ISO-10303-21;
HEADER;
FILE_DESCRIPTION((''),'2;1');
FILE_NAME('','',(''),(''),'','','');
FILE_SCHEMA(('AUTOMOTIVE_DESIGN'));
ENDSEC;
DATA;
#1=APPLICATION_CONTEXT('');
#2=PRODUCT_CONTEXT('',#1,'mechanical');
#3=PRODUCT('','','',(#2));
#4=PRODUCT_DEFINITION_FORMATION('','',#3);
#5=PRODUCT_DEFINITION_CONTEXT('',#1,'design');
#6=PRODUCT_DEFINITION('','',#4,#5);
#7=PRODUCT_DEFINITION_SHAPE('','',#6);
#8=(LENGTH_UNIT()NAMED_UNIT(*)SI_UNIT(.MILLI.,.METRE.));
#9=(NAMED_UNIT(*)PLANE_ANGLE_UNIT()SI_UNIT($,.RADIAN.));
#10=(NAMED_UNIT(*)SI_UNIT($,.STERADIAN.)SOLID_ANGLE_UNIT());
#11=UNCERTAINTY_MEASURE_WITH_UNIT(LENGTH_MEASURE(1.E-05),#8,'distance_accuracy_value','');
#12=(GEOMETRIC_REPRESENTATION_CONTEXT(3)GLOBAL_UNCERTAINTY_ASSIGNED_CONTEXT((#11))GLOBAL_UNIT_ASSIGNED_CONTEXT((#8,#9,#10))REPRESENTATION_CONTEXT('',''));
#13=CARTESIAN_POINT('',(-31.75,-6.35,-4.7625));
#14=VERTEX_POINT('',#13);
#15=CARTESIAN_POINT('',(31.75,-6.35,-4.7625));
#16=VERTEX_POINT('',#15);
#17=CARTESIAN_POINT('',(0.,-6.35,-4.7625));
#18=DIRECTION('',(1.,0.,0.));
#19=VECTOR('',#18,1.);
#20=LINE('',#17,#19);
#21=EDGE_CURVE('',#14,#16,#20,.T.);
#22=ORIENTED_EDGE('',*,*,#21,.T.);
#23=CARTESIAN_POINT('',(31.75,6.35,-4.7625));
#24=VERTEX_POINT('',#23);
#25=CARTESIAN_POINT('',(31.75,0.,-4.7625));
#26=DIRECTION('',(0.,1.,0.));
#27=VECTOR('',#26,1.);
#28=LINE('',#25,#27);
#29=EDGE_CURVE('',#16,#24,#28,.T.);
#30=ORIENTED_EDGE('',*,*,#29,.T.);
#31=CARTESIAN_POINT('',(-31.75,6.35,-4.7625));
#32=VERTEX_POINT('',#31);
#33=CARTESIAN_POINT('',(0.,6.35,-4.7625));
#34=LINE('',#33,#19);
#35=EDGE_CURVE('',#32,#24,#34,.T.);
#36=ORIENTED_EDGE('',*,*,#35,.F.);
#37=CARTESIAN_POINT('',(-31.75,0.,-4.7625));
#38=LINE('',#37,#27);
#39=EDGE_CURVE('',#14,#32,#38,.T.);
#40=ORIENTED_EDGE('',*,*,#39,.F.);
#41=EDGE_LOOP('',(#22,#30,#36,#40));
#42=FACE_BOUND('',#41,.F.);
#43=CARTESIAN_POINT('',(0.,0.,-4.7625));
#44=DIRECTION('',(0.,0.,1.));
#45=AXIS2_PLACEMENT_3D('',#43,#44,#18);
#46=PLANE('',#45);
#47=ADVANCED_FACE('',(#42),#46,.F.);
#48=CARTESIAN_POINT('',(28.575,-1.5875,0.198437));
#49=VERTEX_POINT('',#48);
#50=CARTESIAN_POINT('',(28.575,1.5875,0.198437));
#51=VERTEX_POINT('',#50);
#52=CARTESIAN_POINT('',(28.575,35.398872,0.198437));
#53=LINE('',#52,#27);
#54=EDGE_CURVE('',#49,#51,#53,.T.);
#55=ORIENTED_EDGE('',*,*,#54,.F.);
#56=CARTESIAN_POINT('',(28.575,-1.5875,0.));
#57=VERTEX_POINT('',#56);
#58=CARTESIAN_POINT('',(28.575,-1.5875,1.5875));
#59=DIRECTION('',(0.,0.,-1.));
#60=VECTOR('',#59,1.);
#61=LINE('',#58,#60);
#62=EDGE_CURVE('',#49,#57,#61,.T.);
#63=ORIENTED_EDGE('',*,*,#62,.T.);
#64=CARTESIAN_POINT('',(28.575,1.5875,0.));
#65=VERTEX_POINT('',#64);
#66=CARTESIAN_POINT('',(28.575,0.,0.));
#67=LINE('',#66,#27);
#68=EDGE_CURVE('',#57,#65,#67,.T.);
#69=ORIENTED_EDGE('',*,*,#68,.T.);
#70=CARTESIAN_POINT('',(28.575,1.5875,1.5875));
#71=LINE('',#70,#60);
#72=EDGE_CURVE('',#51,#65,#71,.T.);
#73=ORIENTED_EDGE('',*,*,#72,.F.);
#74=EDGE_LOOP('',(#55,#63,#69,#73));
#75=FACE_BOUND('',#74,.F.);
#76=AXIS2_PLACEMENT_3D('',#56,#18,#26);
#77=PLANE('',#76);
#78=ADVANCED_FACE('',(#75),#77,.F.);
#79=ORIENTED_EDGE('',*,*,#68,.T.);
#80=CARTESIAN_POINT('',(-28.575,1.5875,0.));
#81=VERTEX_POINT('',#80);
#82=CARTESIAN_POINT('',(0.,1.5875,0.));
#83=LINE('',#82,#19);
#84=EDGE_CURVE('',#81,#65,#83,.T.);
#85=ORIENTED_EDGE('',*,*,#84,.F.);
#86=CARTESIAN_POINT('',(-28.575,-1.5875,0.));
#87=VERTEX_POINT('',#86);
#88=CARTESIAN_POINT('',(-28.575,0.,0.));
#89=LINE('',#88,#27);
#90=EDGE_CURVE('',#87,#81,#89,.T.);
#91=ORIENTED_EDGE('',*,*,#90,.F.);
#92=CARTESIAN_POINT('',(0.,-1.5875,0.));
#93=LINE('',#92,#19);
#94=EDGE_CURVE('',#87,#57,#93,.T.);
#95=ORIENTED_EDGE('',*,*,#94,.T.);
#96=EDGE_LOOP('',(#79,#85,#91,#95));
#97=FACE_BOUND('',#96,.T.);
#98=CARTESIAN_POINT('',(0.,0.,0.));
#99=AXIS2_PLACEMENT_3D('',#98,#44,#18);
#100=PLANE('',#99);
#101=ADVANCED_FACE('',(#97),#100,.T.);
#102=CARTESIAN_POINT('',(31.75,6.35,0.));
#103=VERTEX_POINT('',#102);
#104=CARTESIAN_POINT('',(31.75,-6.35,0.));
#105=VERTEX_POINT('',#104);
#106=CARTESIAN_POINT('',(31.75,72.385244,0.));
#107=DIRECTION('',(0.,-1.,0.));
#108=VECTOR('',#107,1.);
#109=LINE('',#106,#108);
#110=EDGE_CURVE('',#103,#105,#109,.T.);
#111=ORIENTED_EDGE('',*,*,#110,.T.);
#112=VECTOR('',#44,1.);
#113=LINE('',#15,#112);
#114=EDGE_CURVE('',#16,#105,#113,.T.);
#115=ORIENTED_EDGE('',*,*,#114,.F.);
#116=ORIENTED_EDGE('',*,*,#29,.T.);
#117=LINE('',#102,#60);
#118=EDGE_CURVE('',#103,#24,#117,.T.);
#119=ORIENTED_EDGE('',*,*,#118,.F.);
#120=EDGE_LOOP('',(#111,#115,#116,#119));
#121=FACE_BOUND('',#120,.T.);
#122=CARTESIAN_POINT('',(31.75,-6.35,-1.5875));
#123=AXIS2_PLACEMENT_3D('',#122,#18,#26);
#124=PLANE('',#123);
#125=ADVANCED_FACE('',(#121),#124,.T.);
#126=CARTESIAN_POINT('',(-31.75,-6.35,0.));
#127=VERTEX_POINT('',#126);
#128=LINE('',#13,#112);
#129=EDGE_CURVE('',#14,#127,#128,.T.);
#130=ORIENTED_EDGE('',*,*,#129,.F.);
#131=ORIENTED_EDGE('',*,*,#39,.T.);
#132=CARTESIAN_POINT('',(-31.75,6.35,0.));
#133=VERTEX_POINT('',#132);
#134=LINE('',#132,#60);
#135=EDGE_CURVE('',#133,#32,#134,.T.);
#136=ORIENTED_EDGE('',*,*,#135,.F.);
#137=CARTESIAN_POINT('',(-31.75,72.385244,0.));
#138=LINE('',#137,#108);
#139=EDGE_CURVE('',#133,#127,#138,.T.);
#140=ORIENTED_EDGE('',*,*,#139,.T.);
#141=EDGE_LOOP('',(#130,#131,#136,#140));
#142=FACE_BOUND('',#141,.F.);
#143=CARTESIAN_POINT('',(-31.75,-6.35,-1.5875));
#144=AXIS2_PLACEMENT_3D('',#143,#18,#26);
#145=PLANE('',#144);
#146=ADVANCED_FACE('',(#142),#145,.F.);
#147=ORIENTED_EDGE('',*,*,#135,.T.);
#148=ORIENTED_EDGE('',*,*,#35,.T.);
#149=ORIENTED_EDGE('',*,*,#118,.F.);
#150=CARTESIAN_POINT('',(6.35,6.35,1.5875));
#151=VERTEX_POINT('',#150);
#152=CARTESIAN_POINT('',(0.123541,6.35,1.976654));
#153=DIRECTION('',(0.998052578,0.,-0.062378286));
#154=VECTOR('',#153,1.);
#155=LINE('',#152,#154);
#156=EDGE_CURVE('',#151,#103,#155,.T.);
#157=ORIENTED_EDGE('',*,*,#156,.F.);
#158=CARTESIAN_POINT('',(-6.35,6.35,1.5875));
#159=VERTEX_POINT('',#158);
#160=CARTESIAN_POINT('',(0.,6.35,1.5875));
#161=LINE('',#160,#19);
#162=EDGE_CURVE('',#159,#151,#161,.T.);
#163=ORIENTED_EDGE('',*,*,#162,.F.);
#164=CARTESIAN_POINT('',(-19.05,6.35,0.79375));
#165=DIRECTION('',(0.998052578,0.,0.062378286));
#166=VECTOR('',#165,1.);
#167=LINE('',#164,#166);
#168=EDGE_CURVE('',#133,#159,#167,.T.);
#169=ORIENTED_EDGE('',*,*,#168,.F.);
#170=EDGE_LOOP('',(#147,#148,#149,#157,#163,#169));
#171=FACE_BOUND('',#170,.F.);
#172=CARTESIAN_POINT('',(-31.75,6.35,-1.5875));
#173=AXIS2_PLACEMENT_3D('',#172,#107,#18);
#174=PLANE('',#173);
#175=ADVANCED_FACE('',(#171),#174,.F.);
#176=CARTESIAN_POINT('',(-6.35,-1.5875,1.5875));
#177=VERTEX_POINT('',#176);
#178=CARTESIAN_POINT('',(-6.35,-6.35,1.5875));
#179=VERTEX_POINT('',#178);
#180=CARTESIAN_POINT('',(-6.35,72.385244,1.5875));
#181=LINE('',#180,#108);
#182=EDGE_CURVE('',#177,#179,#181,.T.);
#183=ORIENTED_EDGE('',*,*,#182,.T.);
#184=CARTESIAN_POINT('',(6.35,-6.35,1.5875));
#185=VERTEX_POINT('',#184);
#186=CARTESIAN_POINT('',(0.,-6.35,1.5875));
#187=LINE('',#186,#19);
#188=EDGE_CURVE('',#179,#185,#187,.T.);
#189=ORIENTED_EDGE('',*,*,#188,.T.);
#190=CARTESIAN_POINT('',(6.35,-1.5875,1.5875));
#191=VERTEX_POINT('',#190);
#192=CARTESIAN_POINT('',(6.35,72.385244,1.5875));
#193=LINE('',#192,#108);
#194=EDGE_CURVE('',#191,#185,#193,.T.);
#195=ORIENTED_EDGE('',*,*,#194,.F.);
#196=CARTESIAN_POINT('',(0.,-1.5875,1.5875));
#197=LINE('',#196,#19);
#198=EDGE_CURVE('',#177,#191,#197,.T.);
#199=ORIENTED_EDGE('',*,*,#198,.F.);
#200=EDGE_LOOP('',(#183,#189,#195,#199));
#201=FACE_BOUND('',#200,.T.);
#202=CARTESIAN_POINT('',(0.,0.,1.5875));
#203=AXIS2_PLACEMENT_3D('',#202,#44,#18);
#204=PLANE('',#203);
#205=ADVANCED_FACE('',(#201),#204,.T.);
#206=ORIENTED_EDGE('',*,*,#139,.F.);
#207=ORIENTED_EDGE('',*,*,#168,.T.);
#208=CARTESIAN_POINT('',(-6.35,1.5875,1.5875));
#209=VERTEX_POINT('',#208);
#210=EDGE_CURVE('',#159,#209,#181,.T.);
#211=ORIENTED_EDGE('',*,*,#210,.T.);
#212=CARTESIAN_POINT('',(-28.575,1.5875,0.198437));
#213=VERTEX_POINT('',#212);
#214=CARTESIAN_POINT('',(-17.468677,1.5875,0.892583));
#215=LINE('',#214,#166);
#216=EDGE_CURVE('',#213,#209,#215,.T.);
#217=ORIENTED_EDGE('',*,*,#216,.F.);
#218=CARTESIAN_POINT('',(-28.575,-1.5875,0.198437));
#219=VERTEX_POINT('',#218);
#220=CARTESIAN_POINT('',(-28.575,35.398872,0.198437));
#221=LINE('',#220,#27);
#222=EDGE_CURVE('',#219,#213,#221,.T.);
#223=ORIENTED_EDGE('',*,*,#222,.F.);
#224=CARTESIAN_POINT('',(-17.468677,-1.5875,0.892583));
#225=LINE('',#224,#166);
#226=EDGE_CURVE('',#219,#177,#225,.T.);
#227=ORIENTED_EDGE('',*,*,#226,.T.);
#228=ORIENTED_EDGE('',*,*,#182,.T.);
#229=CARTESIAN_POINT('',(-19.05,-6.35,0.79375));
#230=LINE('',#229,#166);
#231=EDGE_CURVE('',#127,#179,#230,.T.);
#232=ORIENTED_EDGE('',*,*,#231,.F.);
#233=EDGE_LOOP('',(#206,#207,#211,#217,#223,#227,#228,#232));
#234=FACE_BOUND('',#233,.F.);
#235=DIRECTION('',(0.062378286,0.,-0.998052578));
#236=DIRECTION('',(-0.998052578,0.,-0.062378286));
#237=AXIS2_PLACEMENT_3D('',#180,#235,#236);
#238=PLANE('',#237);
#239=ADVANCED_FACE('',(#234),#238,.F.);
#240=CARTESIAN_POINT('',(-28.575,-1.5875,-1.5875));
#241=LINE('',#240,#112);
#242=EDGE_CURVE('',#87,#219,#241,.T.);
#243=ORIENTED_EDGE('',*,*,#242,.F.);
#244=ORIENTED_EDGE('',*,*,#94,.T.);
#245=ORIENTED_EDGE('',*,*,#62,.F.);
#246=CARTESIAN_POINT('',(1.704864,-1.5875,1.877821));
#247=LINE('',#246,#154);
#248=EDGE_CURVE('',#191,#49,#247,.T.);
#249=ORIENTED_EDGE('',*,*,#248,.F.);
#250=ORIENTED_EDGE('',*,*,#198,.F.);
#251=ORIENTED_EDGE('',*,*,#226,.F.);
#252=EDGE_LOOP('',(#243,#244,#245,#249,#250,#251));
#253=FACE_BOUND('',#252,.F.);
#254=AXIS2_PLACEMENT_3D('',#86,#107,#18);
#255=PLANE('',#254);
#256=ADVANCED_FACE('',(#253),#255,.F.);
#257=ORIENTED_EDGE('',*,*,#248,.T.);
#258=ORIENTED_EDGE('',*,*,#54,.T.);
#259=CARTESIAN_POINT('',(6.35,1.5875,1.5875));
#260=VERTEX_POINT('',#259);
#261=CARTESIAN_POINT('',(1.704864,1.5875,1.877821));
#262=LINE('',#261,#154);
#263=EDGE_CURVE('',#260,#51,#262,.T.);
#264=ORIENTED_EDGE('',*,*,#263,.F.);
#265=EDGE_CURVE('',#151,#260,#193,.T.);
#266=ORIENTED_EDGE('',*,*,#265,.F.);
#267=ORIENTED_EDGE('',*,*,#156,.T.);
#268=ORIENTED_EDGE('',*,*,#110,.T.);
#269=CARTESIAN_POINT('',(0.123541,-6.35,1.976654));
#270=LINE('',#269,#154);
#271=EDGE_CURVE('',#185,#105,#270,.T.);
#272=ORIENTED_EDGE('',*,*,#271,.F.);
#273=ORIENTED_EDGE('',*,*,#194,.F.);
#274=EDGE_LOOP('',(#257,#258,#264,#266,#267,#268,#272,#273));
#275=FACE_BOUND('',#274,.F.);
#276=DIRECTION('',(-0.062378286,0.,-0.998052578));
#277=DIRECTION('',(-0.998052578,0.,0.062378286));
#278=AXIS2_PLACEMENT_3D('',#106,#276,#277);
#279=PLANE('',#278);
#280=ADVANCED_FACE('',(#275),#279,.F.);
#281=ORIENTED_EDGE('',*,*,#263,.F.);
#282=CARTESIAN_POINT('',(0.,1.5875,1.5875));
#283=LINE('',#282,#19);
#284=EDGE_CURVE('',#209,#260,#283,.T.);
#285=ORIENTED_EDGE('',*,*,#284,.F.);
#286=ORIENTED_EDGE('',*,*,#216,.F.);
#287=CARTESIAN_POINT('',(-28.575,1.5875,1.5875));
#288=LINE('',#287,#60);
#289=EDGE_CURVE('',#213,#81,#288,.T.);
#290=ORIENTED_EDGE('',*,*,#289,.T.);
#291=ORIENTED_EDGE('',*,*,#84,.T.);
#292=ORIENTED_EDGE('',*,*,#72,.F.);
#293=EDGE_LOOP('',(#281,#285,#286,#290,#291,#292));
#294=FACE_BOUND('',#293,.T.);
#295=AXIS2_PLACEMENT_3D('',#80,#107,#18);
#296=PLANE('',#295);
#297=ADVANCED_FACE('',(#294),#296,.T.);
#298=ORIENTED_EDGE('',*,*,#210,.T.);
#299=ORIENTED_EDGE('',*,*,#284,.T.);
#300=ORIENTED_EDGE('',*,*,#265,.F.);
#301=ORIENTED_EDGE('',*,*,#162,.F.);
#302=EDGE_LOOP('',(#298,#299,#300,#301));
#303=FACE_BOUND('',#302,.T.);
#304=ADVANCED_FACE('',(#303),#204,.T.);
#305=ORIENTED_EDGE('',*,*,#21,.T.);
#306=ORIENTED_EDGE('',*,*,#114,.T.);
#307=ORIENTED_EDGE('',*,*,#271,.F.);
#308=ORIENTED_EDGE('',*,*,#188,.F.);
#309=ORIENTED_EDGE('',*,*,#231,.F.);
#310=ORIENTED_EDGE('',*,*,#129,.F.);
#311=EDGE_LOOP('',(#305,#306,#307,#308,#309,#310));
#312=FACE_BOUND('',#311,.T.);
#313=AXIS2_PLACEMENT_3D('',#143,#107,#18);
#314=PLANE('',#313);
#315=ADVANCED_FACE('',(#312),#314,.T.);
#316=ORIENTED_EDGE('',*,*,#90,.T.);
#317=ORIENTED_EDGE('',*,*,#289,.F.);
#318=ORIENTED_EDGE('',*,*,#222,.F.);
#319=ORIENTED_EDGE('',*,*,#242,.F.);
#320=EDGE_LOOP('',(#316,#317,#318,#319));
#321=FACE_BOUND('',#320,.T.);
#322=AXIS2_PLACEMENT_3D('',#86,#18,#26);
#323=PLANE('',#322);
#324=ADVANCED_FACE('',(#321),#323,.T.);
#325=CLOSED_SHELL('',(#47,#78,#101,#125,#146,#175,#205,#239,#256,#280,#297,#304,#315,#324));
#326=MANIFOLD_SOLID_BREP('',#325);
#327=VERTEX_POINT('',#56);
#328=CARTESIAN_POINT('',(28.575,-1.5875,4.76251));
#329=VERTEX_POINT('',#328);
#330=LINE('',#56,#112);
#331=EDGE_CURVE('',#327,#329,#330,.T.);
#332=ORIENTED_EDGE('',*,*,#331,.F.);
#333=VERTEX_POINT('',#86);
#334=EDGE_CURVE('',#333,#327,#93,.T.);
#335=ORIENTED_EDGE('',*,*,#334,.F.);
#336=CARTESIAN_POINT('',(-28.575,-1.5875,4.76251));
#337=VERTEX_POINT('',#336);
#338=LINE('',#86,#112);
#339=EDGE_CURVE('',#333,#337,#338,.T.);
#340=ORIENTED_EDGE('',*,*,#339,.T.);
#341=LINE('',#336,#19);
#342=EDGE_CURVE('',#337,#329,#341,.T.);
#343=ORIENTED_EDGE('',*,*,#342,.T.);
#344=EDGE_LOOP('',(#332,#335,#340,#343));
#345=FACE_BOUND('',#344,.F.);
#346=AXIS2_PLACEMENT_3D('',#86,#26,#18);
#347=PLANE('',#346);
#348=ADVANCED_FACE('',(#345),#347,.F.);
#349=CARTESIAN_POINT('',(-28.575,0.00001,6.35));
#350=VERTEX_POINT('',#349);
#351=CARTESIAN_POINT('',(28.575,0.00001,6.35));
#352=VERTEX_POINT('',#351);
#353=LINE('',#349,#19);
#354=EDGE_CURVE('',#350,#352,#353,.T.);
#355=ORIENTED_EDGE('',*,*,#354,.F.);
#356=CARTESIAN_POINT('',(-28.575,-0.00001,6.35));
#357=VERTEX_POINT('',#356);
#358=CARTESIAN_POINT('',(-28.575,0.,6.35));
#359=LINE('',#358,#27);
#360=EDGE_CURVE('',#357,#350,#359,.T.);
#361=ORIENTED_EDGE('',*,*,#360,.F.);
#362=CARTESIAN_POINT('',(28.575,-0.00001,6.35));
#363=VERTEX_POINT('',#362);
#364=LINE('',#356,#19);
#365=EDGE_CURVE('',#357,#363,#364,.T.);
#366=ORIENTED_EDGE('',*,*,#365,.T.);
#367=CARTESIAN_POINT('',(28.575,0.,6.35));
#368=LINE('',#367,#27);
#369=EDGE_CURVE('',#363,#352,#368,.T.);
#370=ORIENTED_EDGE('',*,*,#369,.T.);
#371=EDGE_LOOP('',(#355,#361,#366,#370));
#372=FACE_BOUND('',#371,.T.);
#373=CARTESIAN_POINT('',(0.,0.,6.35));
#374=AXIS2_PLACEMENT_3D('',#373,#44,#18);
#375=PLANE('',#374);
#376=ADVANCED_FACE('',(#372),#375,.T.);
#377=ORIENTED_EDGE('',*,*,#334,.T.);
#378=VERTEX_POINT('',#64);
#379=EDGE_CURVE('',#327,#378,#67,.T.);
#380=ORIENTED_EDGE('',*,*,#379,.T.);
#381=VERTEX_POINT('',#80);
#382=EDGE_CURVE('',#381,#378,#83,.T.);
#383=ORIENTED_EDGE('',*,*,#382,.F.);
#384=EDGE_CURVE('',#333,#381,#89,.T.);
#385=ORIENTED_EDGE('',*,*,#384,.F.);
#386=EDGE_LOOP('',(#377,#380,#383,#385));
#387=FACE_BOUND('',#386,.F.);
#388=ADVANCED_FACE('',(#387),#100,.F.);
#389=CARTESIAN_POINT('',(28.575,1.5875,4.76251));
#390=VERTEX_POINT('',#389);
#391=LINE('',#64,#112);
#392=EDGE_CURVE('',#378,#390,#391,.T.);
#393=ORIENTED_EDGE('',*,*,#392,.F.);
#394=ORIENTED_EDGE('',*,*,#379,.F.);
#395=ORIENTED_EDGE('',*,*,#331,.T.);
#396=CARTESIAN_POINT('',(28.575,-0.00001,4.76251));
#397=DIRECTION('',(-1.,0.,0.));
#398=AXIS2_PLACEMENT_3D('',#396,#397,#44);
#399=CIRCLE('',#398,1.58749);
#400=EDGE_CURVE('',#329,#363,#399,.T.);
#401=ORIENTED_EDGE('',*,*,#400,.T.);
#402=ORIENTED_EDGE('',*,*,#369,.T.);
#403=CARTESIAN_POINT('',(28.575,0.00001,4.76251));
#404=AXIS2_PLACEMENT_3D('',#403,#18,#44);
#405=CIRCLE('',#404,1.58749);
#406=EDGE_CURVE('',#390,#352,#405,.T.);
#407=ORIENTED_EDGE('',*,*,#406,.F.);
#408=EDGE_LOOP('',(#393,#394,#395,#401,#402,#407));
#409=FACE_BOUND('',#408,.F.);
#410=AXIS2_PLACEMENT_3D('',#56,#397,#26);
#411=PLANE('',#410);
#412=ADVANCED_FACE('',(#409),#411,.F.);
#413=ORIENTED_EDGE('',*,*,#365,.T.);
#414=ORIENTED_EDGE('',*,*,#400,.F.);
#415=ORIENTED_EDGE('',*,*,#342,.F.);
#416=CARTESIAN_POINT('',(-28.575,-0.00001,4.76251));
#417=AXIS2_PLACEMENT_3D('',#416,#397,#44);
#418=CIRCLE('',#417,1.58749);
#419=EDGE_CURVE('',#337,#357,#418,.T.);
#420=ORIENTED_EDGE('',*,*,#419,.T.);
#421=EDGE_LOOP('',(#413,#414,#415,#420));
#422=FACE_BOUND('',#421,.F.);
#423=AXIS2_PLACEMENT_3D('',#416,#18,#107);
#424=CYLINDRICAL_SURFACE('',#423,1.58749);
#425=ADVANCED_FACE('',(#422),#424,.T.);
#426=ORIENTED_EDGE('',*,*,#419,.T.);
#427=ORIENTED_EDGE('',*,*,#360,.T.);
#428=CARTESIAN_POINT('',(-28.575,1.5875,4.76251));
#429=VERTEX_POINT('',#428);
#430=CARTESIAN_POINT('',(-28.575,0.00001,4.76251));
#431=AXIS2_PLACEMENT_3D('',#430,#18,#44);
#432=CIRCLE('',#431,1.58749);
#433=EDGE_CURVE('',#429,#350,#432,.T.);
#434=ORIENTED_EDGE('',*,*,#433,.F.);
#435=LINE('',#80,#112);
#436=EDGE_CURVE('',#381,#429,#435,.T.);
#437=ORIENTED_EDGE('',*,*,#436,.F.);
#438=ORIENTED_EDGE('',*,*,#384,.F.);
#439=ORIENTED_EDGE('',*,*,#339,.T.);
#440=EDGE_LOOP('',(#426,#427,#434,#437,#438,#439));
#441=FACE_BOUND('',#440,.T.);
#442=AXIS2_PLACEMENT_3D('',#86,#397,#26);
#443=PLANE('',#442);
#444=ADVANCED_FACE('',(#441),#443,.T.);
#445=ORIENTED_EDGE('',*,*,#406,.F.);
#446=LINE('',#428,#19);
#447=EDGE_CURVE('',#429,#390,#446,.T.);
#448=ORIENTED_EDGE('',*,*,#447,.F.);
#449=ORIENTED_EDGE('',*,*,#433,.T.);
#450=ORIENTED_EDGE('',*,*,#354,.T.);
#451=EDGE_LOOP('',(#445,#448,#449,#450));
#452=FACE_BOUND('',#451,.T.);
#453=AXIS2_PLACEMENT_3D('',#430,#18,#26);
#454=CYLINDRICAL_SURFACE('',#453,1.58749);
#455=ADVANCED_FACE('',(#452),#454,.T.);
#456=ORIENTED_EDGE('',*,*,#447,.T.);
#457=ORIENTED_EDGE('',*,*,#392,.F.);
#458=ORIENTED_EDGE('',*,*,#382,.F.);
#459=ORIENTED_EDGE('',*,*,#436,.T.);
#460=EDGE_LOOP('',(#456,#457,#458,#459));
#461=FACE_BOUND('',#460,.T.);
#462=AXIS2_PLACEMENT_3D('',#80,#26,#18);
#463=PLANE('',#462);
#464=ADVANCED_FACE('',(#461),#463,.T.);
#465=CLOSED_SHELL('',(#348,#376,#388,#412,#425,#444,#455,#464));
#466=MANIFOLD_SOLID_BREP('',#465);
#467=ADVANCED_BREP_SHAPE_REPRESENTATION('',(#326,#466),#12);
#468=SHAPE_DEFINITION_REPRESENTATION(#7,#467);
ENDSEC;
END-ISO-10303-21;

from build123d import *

# Parameters (mm, degrees)
F0_W        = 63.5
F0_H        = 12.7
F0_W_2      = 57.15
F0_H_2      = 3.175
F1_DEPTH    = 1.5875
F2_DEPTH    = 1.5875
F3_DEPTH    = 6.35
F4_R        = 1.58749
F5_T1_DEPTH = 144.7704872523
F6_DEPTH    = 3.175


# Not quite as in the source:
# - a fillet or chamfer that OpenCascade refuses, or shapes differently, is made with other operations: its cross-section is extruded or revolved along the edge and cut away or added
# - a fillet or chamfer is up to 0.001 mm smaller than in the source, because OpenCascade refuses the exact size


with BuildPart() as f1:
    # F0 (on Top) → F1 (new body, symmetric)
    with BuildSketch(Plane.XY):
        Rectangle(F0_W, F0_H)
        Rectangle(F0_W_2, F0_H_2, mode=Mode.SUBTRACT)
    extrude(amount=F1_DEPTH, both=True)

    # F0 (on Top) → F2 (join)
    with BuildSketch(Plane.XY):
        Rectangle(F0_W_2, F0_H_2)
    extrude(amount=-F2_DEPTH)

    # F5: chamfer of 25.4 x 1.5875 on 2 edges, made by hand

    # F5_s2 → F5_t1 (cut)
    with BuildSketch(Plane.XZ.offset(-72.3852436262)):
        Polygon((-6.35, 1.5875), (-31.75, 0), (-31.75, 1.5875), align=None)
        Polygon((31.75, 0), (6.35, 1.5875), (31.75, 1.5875), align=None)
    extrude(amount=F5_T1_DEPTH, mode=Mode.SUBTRACT)

    # F6 (add): a face of the model
    f6_faces = [f1.faces().sort_by_distance(p)[0] for p in [
        (0, 0, -1.5875),
    ]]
    extrude(f6_faces, amount=F6_DEPTH)


with BuildPart() as f3:
    # F0 (on Top) → F3 (new body)
    with BuildSketch(Plane.XY):
        Rectangle(F0_W_2, F0_H_2)
    extrude(amount=F3_DEPTH)

    # F4 (radius 1.5875 in the source; OpenCascade refuses exactly that, so slightly less here)
    f4_edges = [f3.edges().sort_by_distance(p)[0] for p in [
        (0, -1.5875, 6.35),
        (0, 1.5875, 6.35),
    ]]
    fillet(f4_edges, radius=F4_R)


solid = Compound([f1.part, f3.part])
